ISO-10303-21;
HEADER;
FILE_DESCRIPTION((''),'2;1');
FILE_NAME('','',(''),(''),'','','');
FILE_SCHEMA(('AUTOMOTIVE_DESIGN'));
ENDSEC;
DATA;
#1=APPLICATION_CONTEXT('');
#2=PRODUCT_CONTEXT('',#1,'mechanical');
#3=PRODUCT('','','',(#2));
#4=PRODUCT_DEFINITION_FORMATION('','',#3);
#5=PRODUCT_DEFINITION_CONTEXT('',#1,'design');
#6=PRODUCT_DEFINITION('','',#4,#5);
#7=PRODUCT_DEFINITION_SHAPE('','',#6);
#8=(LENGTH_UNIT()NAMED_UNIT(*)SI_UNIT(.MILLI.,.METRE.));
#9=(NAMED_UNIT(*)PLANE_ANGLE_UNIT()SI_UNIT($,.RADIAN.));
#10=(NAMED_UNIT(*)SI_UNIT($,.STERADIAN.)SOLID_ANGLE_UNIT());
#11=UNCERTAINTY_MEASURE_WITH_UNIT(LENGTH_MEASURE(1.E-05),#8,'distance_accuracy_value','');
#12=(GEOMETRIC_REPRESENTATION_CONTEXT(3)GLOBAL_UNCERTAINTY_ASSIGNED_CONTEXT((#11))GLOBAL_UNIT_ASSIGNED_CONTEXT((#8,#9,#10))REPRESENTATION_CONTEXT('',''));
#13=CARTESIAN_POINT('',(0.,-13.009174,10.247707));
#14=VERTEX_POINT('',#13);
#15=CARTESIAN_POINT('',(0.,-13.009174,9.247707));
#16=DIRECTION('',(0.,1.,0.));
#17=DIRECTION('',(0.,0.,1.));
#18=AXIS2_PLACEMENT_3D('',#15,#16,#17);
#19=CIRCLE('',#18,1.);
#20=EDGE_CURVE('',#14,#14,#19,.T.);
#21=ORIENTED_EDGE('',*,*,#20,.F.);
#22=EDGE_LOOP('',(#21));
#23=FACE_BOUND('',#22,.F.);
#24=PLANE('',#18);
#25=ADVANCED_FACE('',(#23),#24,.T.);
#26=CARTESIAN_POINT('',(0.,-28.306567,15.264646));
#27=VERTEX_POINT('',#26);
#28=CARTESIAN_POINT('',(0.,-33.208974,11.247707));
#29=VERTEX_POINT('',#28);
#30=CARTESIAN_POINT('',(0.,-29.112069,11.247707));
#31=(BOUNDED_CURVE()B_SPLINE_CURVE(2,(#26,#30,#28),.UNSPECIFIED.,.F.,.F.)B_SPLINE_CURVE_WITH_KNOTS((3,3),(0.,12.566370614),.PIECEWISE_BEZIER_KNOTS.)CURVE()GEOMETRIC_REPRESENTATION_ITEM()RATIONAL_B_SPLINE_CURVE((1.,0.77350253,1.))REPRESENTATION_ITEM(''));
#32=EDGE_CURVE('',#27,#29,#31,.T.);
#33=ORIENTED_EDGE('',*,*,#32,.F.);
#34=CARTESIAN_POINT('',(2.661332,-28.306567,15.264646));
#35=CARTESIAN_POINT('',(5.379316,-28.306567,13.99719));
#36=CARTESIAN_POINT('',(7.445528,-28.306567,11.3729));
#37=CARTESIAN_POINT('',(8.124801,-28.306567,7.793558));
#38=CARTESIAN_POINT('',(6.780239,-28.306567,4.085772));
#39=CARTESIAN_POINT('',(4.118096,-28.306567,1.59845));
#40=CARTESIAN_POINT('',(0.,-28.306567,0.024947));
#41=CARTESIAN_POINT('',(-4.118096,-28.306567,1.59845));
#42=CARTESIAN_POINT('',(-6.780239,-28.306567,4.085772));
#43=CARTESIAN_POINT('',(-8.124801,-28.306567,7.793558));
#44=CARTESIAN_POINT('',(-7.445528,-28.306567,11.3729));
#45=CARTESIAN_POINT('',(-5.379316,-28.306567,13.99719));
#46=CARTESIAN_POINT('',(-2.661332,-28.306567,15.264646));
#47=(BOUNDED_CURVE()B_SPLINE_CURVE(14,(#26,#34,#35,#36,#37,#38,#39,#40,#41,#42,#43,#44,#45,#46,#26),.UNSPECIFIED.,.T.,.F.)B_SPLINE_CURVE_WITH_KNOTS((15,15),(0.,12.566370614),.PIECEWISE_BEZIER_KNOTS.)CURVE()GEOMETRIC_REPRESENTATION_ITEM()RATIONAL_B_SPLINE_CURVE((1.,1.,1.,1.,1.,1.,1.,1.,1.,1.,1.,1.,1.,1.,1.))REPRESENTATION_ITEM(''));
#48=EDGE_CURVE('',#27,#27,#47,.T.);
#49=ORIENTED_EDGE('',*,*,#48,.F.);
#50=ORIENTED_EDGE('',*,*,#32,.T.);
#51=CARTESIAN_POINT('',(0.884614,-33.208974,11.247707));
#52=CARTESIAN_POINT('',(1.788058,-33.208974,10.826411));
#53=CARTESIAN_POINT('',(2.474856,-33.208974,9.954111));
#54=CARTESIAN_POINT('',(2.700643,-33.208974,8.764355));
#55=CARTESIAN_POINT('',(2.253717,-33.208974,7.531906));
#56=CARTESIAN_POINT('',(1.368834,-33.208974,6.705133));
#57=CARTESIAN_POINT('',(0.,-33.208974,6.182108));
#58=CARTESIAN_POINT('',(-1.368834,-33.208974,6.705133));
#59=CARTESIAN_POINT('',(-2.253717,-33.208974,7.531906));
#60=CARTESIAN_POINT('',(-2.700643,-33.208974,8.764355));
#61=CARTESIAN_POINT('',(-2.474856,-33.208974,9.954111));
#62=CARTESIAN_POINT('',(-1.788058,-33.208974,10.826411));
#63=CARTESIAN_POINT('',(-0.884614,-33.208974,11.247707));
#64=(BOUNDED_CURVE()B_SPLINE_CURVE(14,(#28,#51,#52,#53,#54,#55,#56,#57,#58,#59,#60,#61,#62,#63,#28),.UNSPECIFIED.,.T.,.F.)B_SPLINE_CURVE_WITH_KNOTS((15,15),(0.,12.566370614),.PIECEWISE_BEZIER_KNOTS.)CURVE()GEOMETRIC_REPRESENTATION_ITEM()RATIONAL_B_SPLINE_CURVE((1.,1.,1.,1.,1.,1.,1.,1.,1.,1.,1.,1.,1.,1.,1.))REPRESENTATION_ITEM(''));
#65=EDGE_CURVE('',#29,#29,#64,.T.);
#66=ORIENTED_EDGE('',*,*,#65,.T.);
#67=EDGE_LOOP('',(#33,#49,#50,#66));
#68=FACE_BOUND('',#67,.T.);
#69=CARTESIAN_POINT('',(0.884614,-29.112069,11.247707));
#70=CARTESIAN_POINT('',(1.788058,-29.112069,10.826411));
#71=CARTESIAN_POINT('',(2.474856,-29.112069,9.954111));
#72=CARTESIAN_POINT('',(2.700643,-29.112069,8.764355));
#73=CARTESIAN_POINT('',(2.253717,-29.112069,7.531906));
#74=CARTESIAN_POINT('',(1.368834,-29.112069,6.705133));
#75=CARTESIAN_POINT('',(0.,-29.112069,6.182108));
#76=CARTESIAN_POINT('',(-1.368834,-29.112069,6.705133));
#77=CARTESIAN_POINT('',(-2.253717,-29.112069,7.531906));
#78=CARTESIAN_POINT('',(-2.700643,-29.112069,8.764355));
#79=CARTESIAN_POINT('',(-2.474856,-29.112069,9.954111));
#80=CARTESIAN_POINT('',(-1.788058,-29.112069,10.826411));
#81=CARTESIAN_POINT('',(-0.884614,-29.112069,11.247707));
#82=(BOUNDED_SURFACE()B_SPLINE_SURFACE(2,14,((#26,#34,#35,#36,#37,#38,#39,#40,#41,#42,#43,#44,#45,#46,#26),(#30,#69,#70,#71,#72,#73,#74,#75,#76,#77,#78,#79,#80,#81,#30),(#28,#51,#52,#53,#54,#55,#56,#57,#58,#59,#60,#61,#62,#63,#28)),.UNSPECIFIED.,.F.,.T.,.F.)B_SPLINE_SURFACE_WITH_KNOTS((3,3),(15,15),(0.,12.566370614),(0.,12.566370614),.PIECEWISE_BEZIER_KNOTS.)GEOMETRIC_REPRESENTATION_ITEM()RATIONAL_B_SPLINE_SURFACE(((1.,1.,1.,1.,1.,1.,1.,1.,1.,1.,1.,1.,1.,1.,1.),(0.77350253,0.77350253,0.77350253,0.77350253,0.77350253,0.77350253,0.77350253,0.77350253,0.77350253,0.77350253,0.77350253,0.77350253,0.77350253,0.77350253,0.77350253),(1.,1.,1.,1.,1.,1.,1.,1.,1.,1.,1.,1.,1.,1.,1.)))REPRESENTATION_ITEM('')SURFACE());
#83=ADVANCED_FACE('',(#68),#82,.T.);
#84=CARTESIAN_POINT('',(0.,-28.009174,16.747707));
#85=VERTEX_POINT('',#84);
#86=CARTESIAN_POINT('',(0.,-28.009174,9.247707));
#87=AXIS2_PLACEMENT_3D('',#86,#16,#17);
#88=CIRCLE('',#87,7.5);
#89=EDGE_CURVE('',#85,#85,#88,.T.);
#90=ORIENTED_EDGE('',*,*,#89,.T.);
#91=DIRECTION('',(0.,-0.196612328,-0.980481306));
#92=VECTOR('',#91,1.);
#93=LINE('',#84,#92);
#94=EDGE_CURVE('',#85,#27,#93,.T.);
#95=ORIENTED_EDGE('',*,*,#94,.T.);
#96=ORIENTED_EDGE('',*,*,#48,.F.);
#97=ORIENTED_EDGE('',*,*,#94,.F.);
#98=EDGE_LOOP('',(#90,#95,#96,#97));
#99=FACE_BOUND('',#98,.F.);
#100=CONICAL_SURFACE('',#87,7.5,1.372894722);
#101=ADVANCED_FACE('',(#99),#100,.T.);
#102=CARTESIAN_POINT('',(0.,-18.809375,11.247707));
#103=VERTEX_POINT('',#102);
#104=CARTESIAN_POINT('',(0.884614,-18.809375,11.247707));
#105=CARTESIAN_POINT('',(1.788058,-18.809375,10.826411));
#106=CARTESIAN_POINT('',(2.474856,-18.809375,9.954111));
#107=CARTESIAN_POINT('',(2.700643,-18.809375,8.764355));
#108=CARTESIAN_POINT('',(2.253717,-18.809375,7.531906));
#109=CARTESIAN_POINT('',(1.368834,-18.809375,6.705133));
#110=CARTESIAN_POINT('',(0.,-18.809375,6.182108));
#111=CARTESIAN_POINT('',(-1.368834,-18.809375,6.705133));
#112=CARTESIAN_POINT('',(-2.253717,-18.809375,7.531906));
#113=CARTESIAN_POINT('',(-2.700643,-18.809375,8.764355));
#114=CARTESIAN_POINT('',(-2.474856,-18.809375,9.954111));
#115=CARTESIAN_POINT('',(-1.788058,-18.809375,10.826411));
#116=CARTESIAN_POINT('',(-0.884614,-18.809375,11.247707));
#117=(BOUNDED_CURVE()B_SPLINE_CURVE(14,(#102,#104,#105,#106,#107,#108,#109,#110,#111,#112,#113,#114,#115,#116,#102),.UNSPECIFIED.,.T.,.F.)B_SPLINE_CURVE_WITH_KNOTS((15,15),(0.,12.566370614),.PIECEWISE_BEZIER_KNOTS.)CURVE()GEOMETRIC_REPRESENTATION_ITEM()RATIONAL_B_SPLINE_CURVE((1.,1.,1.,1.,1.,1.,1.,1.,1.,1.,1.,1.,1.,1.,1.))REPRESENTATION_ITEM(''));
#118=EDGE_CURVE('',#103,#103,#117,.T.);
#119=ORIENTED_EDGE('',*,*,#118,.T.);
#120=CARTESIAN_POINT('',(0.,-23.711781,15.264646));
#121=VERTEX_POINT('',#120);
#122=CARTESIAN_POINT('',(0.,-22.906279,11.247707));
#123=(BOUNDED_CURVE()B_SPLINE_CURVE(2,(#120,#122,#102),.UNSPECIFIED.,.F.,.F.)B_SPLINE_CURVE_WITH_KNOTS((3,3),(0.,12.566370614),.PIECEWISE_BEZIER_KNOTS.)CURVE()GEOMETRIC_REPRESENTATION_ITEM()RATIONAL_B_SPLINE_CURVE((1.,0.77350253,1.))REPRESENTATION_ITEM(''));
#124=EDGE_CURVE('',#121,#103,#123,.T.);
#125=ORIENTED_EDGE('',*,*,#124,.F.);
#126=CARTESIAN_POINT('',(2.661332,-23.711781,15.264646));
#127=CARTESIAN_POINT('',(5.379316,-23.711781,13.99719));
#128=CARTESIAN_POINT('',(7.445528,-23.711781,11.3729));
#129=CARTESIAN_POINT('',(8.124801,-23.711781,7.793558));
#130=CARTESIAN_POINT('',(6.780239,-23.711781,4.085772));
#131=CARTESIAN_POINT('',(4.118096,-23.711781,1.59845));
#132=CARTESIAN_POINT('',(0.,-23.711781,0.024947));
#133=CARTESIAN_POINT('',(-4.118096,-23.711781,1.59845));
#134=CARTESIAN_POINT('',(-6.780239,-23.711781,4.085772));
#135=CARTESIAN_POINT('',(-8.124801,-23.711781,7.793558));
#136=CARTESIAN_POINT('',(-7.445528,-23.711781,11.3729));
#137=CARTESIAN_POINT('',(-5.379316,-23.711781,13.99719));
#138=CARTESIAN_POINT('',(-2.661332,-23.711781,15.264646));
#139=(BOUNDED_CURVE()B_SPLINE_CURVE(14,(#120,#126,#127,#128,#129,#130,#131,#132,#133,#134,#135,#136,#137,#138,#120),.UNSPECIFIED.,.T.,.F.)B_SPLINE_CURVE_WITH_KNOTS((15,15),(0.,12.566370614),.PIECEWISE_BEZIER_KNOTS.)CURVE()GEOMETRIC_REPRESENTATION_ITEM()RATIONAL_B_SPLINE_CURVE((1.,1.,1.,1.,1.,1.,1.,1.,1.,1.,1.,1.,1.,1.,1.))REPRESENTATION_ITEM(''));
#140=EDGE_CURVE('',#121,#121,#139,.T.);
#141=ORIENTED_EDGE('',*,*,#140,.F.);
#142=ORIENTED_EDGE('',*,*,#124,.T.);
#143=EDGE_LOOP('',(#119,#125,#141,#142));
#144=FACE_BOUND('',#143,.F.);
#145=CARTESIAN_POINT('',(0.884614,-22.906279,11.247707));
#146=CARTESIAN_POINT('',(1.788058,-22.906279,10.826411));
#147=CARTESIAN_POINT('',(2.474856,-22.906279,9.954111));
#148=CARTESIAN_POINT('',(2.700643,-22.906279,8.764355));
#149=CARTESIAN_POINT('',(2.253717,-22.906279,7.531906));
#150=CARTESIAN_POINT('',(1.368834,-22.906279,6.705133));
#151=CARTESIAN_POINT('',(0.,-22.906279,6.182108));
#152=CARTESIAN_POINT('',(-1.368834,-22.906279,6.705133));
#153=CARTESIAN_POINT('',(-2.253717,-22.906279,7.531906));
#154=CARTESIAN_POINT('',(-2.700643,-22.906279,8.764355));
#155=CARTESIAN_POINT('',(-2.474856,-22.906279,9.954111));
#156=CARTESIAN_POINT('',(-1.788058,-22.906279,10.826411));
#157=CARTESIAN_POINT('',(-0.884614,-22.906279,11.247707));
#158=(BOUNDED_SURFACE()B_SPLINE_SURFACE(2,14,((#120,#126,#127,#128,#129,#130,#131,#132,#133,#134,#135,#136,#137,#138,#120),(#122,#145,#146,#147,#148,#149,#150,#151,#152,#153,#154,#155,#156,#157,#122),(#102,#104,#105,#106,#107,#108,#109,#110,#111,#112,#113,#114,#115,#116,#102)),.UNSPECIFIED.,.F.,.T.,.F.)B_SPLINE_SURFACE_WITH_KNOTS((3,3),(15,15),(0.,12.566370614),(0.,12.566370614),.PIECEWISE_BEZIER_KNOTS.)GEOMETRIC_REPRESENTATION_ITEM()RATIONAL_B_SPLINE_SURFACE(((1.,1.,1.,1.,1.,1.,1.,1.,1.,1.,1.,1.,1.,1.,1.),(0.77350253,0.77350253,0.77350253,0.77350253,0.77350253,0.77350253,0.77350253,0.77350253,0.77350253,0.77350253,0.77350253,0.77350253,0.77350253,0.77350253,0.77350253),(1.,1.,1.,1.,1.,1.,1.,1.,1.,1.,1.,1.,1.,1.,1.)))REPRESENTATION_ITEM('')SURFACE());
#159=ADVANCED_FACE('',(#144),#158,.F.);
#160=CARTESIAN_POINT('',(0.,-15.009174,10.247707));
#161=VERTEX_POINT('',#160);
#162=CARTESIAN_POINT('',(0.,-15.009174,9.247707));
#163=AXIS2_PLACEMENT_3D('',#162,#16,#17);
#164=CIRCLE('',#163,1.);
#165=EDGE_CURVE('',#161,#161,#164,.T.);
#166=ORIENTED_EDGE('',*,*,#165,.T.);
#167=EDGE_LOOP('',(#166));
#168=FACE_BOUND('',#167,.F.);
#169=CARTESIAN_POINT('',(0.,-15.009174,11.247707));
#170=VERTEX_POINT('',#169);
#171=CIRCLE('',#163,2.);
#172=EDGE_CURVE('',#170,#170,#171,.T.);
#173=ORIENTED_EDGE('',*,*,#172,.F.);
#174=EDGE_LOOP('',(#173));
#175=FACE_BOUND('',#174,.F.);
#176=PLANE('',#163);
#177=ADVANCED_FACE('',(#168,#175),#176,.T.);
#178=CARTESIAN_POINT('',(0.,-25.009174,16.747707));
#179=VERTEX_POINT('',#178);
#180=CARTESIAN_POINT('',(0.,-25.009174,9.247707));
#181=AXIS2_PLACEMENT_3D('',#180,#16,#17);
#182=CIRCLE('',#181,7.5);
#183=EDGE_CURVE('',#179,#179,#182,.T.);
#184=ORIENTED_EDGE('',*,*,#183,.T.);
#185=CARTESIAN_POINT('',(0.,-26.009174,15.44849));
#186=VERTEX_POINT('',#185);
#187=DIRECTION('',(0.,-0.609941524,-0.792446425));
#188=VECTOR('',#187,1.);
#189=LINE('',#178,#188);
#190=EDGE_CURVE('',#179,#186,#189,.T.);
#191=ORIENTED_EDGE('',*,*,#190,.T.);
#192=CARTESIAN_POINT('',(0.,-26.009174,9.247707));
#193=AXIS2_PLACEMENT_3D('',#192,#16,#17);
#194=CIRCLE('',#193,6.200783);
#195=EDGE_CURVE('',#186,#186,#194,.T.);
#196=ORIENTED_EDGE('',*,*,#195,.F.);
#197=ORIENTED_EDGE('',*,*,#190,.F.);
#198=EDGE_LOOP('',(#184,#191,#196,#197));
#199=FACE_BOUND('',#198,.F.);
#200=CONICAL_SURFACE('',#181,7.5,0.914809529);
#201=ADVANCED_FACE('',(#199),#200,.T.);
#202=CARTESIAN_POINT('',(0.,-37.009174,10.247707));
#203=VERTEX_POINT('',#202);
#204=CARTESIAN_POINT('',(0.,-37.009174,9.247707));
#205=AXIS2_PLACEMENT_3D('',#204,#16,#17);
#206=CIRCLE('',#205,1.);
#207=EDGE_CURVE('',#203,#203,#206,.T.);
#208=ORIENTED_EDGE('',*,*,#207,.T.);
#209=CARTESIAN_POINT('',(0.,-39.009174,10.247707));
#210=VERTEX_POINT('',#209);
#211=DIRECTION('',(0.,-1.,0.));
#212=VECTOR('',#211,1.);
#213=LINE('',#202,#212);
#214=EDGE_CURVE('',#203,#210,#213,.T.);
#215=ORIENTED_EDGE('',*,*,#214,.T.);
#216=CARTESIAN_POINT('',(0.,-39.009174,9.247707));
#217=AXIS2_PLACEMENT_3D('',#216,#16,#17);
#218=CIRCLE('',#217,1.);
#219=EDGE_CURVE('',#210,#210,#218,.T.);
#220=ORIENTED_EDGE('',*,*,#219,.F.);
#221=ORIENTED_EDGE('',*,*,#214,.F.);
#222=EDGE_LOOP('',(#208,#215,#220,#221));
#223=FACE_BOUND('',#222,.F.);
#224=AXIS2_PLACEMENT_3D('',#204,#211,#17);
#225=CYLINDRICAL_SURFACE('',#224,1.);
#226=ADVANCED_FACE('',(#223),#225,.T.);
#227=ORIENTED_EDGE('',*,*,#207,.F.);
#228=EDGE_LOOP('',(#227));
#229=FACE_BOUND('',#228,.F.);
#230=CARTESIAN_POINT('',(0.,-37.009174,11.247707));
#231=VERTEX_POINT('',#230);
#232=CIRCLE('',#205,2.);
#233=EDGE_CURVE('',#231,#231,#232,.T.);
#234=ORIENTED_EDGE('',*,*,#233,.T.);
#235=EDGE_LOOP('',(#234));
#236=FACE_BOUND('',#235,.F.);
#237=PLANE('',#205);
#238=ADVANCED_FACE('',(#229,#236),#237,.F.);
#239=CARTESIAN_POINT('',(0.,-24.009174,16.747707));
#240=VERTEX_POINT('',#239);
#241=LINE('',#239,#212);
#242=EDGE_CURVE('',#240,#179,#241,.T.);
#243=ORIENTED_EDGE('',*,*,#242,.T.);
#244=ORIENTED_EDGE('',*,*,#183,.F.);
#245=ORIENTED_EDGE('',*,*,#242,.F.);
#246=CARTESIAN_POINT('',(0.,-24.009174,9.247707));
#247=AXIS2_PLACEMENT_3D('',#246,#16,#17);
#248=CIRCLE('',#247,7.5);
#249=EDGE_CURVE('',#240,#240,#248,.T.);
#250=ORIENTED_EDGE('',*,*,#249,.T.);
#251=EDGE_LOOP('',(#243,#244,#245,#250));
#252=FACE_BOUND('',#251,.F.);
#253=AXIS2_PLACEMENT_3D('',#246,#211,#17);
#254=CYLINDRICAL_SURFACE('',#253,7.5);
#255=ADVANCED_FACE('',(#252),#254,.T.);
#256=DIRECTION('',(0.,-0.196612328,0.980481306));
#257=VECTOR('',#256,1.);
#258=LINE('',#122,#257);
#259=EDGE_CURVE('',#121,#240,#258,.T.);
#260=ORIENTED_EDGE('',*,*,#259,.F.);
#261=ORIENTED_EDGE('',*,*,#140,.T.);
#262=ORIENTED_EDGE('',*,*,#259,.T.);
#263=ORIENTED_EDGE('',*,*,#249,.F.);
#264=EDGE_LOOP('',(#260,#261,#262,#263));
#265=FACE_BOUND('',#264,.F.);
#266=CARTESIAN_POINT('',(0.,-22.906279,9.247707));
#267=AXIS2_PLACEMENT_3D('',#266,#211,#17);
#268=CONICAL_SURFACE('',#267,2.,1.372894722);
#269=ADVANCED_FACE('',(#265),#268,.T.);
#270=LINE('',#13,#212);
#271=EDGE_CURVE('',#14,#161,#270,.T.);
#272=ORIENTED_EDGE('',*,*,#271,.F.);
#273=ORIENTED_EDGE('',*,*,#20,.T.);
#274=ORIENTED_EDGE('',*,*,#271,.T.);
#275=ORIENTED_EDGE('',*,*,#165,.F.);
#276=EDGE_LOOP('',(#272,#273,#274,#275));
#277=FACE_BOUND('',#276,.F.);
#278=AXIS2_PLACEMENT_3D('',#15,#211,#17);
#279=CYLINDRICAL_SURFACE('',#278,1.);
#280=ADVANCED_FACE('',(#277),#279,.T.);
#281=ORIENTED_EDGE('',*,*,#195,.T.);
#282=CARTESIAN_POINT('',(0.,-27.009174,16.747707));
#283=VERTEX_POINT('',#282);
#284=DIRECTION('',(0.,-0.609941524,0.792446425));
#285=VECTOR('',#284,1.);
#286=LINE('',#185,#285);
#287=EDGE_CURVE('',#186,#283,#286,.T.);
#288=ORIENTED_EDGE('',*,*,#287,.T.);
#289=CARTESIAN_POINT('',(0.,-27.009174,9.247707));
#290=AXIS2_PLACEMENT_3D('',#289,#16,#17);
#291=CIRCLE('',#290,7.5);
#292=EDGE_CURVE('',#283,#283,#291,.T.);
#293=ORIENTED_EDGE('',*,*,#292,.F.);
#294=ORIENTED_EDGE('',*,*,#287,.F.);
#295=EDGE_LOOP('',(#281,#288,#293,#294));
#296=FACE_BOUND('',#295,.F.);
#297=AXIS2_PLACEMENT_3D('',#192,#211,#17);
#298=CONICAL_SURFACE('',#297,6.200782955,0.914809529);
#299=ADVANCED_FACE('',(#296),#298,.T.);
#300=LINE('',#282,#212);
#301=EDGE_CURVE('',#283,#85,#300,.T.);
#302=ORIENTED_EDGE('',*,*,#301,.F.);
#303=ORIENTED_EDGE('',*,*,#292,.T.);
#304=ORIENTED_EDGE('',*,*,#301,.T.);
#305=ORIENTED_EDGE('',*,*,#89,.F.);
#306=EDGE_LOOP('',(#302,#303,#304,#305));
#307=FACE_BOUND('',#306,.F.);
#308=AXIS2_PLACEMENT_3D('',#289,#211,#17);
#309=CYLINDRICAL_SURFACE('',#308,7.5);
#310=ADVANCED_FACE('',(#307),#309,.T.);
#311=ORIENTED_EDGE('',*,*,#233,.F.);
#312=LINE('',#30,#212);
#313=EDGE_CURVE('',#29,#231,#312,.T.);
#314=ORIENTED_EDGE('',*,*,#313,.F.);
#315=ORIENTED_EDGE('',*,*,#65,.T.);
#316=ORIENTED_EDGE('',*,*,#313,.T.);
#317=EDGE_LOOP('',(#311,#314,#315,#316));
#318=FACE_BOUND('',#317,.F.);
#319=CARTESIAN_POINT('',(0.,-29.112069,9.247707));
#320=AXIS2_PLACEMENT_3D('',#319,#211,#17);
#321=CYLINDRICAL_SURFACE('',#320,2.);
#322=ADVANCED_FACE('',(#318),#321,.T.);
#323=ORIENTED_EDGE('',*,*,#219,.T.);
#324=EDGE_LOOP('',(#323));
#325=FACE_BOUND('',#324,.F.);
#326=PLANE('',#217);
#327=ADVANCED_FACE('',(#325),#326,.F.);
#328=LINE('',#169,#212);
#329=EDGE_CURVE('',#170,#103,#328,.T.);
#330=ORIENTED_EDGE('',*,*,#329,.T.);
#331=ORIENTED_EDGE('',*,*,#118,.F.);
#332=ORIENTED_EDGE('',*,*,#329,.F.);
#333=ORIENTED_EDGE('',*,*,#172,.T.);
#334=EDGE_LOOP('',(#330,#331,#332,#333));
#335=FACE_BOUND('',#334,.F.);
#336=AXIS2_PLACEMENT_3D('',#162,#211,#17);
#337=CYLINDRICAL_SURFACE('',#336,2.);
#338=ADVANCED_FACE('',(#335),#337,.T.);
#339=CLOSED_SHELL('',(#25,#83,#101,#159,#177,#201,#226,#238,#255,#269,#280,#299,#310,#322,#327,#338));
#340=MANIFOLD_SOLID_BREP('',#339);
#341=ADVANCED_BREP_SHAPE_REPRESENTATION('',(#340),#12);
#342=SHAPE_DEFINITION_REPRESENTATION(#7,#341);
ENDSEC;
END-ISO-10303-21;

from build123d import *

# Parameters (mm, degrees)
F2_R = 5
F3_R = 5


with BuildPart() as f1:
    # F0 (on Right) → F1 (revolve)
    with BuildSketch(Plane.YZ):
        Polygon((-39.0091740638, 9.247707203), (-26.0091740638, 9.247707203), (-13.0091740638, 9.247707203), (-13.0091740638, 10.247707203), (-15.0091740638, 10.247707203), (-15.0091740638, 11.247707203), (-22.9062791914, 11.247707203), (-24.0091740638, 16.747707203), (-25.0091740638, 16.747707203), (-26.0091740638, 15.4484901577), (-27.0091740638, 16.747707203), (-28.0091740638, 16.747707203), (-29.1120689362, 11.247707203), (-37.0091740638, 11.247707203), (-37.0091740638, 10.247707203), (-39.0091740638, 10.247707203), align=None)
    revolve(axis=Axis((0, -19.5091740638, 9.247707203), (0, 1, 0)))

    # F2
    f2_edges = [f1.edges().sort_by_distance(p)[0] for p in [
        (0, -29.112069, 7.247707),
    ]]
    fillet(f2_edges, radius=F2_R)

    # F3
    f3_edges = [f1.edges().sort_by_distance(p)[0] for p in [
        (0, -22.906279, 7.247707),
    ]]
    fillet(f3_edges, radius=F3_R)


solid = f1.part
